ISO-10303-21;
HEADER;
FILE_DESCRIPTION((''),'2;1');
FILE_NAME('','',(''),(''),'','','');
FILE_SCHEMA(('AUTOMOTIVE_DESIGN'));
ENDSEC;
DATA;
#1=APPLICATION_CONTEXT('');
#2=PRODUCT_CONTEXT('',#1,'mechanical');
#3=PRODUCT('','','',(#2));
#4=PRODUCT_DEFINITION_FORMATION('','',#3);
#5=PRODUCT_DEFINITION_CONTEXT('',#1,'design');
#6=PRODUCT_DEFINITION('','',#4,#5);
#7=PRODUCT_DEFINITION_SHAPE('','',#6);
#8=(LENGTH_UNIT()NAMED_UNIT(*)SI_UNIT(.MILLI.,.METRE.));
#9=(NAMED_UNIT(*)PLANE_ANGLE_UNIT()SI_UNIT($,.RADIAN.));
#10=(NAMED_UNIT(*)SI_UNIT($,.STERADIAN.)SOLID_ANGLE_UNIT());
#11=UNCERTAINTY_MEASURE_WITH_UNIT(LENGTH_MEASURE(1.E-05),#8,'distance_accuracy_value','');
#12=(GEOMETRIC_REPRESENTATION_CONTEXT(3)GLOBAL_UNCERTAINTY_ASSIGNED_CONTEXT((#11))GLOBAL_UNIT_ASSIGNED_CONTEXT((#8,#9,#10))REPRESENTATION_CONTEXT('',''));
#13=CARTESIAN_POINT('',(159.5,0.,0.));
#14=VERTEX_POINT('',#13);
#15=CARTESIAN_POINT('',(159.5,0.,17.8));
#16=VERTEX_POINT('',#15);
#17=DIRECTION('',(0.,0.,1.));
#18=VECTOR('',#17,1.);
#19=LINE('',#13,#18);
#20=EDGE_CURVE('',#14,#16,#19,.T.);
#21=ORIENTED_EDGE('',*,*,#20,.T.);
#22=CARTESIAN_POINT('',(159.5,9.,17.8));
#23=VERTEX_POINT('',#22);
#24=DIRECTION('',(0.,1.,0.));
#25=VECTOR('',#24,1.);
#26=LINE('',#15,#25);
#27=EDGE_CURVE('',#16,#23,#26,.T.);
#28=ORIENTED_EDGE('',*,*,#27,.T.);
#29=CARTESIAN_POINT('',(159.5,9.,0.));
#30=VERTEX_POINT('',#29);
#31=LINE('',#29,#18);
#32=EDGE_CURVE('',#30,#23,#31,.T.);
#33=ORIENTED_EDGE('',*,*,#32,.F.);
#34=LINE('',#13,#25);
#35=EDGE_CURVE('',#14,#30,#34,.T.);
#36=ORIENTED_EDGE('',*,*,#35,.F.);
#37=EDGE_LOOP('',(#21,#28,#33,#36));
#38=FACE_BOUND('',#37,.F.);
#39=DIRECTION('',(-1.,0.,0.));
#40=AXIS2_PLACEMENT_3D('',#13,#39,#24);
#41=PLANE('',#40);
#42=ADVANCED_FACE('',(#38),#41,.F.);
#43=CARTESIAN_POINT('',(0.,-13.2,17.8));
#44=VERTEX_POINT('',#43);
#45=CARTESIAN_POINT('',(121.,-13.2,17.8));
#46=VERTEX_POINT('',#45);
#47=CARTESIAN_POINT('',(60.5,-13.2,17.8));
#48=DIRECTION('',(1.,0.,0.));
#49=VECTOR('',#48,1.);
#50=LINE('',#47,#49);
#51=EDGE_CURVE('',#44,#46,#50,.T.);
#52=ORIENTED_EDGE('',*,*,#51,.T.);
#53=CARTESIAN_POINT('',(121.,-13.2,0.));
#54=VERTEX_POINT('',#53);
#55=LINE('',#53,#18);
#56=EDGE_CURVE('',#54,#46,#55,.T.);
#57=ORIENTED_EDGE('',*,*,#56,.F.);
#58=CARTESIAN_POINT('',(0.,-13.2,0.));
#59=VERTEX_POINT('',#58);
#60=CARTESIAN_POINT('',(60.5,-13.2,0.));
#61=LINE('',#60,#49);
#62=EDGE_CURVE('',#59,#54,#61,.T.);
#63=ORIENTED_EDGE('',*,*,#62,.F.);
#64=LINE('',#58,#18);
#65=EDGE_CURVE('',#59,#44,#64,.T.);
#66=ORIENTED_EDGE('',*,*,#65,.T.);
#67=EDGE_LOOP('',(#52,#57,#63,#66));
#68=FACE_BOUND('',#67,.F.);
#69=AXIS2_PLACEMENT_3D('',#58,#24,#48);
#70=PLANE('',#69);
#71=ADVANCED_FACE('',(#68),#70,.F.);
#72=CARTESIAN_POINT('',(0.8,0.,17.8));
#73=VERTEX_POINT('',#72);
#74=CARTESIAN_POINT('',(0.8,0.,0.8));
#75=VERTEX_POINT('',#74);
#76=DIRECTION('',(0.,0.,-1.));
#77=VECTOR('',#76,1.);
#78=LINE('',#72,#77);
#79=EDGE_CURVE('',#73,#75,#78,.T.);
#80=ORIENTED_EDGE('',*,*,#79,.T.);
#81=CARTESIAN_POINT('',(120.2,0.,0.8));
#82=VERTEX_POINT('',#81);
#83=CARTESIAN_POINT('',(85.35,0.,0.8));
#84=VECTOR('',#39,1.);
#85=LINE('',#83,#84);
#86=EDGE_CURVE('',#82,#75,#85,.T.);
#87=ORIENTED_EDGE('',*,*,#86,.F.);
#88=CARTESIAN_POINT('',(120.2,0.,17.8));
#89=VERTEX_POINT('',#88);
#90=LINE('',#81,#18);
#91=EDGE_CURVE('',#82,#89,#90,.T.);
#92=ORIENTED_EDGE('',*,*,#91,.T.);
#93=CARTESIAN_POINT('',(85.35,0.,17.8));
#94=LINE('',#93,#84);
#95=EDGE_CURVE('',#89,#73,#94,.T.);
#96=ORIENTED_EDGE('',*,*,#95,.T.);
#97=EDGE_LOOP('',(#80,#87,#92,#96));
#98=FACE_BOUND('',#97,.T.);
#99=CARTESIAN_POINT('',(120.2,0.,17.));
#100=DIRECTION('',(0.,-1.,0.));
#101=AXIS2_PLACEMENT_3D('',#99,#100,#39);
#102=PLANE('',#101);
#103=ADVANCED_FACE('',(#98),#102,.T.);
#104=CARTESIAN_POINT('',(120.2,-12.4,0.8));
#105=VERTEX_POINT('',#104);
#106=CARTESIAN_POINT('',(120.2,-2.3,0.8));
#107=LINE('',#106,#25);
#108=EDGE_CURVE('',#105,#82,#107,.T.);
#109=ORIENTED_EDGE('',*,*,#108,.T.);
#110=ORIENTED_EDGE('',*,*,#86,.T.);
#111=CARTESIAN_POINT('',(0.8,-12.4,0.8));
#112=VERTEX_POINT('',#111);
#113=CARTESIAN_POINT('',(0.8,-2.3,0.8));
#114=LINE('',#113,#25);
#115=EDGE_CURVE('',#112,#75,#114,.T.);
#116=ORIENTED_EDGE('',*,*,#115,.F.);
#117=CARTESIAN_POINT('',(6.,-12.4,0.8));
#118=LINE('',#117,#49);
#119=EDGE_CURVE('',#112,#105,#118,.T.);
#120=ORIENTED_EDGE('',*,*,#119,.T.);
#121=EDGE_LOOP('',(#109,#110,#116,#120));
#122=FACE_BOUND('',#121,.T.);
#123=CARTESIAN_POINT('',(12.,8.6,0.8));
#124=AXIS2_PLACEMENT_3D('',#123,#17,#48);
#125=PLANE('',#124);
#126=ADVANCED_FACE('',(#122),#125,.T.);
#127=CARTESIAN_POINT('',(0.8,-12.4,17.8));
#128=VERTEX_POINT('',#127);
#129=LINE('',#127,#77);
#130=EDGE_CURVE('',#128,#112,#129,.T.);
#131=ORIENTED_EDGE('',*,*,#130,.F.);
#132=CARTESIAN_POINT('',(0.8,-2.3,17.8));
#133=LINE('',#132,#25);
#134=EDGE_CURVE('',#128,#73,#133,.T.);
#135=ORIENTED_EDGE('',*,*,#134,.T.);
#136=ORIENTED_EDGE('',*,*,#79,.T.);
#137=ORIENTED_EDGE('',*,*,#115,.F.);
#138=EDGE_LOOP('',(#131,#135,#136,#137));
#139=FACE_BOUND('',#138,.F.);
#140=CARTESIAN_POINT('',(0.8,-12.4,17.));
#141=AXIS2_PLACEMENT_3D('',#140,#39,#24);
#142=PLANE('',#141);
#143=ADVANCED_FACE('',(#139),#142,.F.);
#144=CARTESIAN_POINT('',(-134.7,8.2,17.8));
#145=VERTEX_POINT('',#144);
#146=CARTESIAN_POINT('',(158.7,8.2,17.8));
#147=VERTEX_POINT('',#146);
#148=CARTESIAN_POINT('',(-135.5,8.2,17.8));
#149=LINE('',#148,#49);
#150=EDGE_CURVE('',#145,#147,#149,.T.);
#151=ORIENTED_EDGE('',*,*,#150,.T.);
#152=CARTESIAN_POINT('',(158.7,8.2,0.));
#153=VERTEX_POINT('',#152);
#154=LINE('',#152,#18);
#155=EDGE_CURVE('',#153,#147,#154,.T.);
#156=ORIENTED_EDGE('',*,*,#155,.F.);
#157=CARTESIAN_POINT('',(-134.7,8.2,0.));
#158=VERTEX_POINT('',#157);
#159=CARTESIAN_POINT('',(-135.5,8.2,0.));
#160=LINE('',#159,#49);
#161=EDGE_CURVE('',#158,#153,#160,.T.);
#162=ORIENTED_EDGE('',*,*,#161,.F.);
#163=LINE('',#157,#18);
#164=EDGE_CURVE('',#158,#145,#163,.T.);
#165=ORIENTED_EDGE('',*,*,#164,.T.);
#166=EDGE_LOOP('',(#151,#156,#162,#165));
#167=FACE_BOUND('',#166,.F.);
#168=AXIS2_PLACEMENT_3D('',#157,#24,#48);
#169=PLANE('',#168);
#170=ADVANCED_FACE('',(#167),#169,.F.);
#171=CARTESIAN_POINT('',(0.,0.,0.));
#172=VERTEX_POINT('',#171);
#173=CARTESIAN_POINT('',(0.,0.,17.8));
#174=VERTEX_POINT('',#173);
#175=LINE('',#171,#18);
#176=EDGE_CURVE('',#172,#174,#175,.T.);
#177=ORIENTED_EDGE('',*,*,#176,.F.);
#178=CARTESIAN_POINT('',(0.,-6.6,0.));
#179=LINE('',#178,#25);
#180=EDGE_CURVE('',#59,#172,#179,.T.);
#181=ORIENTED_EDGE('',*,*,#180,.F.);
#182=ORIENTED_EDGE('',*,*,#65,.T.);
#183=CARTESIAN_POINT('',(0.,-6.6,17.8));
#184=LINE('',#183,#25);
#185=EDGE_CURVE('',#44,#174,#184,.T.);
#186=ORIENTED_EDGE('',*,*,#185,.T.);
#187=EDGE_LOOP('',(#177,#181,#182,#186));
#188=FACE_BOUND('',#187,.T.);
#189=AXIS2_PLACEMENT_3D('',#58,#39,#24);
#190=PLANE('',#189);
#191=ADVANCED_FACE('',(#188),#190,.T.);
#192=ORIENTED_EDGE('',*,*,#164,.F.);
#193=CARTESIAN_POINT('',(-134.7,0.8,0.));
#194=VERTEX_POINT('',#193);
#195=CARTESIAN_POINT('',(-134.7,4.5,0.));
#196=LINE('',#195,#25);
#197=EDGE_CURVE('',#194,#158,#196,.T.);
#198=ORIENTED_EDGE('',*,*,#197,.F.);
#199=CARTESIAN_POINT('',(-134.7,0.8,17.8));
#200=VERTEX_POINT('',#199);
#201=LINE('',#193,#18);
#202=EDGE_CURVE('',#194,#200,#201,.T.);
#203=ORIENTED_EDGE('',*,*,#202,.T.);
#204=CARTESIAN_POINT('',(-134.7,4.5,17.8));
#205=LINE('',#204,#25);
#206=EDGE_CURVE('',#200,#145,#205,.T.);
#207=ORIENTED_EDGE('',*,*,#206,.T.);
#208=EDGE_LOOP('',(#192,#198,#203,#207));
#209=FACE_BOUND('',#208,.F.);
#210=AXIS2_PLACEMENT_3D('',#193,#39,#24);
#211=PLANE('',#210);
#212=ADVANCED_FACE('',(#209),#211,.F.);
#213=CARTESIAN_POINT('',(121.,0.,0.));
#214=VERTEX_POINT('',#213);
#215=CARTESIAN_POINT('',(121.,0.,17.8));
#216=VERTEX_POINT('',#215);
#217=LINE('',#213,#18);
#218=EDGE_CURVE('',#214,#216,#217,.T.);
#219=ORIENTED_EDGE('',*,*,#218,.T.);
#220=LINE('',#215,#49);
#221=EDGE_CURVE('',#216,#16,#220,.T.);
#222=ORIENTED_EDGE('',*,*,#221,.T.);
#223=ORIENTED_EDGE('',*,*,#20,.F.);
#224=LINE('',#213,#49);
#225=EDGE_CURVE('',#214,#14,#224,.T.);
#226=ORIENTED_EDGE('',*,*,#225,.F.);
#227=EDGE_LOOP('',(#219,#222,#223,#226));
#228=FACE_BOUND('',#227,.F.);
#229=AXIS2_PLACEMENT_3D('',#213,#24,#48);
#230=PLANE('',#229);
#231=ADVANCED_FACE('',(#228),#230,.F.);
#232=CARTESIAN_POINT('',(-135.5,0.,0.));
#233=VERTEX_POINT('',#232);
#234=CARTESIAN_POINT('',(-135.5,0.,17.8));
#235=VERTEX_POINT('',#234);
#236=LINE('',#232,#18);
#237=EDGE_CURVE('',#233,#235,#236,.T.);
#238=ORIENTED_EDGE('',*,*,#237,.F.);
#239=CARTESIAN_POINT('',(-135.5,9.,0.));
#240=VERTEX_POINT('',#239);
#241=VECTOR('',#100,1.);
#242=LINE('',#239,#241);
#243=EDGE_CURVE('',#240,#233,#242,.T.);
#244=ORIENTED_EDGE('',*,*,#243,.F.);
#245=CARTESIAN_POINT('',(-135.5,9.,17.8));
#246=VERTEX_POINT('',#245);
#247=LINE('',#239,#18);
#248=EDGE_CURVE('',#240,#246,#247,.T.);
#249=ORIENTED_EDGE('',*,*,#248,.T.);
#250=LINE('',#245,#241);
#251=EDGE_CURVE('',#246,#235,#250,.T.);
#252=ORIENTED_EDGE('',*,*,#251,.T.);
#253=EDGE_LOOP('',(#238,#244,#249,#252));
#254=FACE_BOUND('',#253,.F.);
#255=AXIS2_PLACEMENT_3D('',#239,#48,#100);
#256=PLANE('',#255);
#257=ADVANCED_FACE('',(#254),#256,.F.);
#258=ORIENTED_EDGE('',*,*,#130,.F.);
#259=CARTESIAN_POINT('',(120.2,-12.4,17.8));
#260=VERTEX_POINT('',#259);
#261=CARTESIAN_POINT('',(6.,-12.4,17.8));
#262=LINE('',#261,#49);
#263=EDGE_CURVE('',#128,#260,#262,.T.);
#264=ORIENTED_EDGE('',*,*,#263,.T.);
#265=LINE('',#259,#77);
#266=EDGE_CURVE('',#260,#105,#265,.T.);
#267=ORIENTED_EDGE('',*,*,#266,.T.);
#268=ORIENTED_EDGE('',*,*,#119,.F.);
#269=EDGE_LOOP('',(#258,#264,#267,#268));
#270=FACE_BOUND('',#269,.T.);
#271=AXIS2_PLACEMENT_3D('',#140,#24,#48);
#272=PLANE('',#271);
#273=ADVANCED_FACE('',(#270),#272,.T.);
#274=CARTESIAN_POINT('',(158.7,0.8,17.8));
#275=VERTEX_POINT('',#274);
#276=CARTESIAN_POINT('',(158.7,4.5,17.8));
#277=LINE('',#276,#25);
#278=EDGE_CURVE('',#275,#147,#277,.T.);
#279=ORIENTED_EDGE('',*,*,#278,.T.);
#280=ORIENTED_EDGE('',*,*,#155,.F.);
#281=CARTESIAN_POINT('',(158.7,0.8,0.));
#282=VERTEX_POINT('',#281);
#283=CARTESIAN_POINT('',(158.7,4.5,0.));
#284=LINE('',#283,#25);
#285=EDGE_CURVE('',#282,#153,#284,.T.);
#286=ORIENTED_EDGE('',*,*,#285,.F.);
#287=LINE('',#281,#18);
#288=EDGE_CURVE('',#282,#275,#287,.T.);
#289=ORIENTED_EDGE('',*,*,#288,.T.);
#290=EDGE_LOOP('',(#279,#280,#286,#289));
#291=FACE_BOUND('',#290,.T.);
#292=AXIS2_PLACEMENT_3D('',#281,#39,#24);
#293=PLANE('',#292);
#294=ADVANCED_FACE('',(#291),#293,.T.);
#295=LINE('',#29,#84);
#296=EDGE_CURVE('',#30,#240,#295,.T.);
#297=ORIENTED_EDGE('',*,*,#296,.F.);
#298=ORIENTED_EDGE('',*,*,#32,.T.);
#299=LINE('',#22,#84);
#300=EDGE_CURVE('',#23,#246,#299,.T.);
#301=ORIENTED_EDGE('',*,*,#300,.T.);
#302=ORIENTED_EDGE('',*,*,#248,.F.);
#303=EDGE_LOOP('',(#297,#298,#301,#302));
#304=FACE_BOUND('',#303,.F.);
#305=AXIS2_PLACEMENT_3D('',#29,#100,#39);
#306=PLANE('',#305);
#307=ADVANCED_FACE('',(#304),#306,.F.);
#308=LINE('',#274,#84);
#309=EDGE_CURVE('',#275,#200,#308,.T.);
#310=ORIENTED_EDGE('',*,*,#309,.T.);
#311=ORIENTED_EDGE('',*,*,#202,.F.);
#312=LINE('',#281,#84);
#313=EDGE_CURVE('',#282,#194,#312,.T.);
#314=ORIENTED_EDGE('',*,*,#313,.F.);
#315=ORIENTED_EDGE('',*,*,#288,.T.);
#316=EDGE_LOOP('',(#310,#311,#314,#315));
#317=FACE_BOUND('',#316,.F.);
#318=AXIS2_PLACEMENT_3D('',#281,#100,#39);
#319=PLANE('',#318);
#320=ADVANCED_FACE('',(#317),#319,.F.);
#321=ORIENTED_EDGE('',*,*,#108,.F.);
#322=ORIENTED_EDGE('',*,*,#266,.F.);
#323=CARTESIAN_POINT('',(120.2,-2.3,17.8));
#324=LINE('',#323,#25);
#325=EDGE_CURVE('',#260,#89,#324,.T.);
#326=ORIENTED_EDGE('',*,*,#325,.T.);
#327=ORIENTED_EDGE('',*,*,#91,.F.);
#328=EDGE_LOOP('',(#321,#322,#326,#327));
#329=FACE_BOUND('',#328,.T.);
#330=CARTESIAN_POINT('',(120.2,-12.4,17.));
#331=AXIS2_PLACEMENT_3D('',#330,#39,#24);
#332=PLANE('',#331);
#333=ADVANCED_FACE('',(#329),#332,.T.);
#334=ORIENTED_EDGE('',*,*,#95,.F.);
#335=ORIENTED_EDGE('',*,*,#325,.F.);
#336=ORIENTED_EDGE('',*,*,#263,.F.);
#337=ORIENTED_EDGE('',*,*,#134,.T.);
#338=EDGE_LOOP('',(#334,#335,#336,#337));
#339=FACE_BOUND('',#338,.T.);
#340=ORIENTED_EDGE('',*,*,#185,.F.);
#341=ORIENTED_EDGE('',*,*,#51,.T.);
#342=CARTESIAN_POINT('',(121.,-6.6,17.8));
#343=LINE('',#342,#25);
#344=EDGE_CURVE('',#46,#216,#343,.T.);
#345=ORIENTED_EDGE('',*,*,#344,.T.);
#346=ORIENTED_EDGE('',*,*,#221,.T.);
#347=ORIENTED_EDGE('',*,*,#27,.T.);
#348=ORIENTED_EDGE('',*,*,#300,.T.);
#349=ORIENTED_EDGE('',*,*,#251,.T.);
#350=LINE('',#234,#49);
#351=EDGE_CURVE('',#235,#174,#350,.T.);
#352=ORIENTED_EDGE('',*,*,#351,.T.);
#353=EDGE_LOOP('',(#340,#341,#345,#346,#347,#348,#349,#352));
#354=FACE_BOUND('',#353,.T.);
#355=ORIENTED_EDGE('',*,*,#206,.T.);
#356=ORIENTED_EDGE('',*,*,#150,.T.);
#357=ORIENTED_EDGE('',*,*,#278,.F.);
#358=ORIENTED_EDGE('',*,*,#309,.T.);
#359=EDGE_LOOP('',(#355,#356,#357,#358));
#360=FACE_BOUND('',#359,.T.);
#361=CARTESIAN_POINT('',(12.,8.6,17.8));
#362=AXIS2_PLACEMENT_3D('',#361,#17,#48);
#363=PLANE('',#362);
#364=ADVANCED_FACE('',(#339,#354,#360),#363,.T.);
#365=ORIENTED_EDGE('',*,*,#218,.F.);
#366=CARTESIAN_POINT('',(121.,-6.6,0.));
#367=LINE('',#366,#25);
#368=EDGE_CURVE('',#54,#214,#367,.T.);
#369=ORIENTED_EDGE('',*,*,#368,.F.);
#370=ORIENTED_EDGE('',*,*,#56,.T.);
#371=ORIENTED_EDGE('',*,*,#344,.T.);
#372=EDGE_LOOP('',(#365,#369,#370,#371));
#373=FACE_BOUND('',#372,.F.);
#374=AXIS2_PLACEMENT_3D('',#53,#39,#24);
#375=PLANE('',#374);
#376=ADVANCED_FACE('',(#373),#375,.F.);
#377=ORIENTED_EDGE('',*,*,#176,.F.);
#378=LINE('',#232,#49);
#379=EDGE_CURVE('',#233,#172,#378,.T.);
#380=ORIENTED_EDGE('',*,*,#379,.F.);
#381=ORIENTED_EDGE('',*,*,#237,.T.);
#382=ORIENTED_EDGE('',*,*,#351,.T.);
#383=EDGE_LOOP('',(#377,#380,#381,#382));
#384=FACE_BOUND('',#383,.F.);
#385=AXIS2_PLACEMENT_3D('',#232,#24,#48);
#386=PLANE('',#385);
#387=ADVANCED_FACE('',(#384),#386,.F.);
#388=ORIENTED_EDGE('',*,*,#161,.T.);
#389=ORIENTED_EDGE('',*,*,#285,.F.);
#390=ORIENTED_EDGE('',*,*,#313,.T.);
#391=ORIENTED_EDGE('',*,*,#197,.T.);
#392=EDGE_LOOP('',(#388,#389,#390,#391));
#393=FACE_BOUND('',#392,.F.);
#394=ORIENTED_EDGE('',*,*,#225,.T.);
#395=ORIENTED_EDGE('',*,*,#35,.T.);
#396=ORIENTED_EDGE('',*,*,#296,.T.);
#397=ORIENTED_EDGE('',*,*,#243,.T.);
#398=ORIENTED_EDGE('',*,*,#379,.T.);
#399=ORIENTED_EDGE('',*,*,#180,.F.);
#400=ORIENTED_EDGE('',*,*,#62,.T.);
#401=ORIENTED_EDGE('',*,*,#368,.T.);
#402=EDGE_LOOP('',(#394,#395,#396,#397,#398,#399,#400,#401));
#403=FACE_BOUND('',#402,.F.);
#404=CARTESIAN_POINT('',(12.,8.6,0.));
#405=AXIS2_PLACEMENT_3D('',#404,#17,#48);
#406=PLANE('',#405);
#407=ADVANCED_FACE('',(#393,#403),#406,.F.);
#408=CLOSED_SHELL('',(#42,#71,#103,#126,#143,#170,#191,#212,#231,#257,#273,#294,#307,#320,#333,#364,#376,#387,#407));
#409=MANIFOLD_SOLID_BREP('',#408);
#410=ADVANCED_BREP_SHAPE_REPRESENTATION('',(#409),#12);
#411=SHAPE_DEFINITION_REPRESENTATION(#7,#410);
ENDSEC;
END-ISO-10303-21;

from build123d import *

# Parameters (mm, degrees)
F2_W     = 0.8
F2_H     = 7.4
F2_W_2   = 121
F2_H_2   = 13.2
F3_DEPTH = 17.8
F4_T     = -0.8


# Not quite as in the source:
# - a shell that OpenCascade refuses in one call is made with other operations: the cavity is built on its own and cut out


with BuildPart() as f3:
    # F2 (on Top) → F3 (new body)
    with BuildSketch(Plane.XY):
        Polygon((-135.5, 9), (-135.5, 8.2), (-134.7, 8.2), (158.7, 8.2), (159.5, 8.2), (159.5, 9), align=None)
        with Locations((159.1, 4.5)):
            Rectangle(F2_W, F2_H)
        with Locations((-135.1, 4.5)):
            Rectangle(F2_W, F2_H)
        with Locations((60.5, -6.6)):
            Rectangle(F2_W_2, F2_H_2)
        Polygon((-135.5, 0), (0, 0), (121, 0), (159.5, 0), (159.5, 0.8), (158.7, 0.8), (-134.7, 0.8), (-135.5, 0.8), align=None)
    extrude(amount=F3_DEPTH)

    # F4: a shell. OpenCascade refuses it in one call, so the cavity is built on its own and cut out:
    # the body offset inwards by the wall thickness, plus a prism from it out through each open face.
    f4_core = offset(f3.part, amount=F4_T, kind=Kind.INTERSECTION, mode=Mode.PRIVATE)
    f4_exits = [f4_core.faces().sort_by_distance(p)[0] for p in [
        (60.5, -6.2, 17),
    ]]
    add(f4_core, mode=Mode.SUBTRACT)
    extrude(f4_exits, amount=-F4_T, mode=Mode.SUBTRACT)


solid = f3.part
